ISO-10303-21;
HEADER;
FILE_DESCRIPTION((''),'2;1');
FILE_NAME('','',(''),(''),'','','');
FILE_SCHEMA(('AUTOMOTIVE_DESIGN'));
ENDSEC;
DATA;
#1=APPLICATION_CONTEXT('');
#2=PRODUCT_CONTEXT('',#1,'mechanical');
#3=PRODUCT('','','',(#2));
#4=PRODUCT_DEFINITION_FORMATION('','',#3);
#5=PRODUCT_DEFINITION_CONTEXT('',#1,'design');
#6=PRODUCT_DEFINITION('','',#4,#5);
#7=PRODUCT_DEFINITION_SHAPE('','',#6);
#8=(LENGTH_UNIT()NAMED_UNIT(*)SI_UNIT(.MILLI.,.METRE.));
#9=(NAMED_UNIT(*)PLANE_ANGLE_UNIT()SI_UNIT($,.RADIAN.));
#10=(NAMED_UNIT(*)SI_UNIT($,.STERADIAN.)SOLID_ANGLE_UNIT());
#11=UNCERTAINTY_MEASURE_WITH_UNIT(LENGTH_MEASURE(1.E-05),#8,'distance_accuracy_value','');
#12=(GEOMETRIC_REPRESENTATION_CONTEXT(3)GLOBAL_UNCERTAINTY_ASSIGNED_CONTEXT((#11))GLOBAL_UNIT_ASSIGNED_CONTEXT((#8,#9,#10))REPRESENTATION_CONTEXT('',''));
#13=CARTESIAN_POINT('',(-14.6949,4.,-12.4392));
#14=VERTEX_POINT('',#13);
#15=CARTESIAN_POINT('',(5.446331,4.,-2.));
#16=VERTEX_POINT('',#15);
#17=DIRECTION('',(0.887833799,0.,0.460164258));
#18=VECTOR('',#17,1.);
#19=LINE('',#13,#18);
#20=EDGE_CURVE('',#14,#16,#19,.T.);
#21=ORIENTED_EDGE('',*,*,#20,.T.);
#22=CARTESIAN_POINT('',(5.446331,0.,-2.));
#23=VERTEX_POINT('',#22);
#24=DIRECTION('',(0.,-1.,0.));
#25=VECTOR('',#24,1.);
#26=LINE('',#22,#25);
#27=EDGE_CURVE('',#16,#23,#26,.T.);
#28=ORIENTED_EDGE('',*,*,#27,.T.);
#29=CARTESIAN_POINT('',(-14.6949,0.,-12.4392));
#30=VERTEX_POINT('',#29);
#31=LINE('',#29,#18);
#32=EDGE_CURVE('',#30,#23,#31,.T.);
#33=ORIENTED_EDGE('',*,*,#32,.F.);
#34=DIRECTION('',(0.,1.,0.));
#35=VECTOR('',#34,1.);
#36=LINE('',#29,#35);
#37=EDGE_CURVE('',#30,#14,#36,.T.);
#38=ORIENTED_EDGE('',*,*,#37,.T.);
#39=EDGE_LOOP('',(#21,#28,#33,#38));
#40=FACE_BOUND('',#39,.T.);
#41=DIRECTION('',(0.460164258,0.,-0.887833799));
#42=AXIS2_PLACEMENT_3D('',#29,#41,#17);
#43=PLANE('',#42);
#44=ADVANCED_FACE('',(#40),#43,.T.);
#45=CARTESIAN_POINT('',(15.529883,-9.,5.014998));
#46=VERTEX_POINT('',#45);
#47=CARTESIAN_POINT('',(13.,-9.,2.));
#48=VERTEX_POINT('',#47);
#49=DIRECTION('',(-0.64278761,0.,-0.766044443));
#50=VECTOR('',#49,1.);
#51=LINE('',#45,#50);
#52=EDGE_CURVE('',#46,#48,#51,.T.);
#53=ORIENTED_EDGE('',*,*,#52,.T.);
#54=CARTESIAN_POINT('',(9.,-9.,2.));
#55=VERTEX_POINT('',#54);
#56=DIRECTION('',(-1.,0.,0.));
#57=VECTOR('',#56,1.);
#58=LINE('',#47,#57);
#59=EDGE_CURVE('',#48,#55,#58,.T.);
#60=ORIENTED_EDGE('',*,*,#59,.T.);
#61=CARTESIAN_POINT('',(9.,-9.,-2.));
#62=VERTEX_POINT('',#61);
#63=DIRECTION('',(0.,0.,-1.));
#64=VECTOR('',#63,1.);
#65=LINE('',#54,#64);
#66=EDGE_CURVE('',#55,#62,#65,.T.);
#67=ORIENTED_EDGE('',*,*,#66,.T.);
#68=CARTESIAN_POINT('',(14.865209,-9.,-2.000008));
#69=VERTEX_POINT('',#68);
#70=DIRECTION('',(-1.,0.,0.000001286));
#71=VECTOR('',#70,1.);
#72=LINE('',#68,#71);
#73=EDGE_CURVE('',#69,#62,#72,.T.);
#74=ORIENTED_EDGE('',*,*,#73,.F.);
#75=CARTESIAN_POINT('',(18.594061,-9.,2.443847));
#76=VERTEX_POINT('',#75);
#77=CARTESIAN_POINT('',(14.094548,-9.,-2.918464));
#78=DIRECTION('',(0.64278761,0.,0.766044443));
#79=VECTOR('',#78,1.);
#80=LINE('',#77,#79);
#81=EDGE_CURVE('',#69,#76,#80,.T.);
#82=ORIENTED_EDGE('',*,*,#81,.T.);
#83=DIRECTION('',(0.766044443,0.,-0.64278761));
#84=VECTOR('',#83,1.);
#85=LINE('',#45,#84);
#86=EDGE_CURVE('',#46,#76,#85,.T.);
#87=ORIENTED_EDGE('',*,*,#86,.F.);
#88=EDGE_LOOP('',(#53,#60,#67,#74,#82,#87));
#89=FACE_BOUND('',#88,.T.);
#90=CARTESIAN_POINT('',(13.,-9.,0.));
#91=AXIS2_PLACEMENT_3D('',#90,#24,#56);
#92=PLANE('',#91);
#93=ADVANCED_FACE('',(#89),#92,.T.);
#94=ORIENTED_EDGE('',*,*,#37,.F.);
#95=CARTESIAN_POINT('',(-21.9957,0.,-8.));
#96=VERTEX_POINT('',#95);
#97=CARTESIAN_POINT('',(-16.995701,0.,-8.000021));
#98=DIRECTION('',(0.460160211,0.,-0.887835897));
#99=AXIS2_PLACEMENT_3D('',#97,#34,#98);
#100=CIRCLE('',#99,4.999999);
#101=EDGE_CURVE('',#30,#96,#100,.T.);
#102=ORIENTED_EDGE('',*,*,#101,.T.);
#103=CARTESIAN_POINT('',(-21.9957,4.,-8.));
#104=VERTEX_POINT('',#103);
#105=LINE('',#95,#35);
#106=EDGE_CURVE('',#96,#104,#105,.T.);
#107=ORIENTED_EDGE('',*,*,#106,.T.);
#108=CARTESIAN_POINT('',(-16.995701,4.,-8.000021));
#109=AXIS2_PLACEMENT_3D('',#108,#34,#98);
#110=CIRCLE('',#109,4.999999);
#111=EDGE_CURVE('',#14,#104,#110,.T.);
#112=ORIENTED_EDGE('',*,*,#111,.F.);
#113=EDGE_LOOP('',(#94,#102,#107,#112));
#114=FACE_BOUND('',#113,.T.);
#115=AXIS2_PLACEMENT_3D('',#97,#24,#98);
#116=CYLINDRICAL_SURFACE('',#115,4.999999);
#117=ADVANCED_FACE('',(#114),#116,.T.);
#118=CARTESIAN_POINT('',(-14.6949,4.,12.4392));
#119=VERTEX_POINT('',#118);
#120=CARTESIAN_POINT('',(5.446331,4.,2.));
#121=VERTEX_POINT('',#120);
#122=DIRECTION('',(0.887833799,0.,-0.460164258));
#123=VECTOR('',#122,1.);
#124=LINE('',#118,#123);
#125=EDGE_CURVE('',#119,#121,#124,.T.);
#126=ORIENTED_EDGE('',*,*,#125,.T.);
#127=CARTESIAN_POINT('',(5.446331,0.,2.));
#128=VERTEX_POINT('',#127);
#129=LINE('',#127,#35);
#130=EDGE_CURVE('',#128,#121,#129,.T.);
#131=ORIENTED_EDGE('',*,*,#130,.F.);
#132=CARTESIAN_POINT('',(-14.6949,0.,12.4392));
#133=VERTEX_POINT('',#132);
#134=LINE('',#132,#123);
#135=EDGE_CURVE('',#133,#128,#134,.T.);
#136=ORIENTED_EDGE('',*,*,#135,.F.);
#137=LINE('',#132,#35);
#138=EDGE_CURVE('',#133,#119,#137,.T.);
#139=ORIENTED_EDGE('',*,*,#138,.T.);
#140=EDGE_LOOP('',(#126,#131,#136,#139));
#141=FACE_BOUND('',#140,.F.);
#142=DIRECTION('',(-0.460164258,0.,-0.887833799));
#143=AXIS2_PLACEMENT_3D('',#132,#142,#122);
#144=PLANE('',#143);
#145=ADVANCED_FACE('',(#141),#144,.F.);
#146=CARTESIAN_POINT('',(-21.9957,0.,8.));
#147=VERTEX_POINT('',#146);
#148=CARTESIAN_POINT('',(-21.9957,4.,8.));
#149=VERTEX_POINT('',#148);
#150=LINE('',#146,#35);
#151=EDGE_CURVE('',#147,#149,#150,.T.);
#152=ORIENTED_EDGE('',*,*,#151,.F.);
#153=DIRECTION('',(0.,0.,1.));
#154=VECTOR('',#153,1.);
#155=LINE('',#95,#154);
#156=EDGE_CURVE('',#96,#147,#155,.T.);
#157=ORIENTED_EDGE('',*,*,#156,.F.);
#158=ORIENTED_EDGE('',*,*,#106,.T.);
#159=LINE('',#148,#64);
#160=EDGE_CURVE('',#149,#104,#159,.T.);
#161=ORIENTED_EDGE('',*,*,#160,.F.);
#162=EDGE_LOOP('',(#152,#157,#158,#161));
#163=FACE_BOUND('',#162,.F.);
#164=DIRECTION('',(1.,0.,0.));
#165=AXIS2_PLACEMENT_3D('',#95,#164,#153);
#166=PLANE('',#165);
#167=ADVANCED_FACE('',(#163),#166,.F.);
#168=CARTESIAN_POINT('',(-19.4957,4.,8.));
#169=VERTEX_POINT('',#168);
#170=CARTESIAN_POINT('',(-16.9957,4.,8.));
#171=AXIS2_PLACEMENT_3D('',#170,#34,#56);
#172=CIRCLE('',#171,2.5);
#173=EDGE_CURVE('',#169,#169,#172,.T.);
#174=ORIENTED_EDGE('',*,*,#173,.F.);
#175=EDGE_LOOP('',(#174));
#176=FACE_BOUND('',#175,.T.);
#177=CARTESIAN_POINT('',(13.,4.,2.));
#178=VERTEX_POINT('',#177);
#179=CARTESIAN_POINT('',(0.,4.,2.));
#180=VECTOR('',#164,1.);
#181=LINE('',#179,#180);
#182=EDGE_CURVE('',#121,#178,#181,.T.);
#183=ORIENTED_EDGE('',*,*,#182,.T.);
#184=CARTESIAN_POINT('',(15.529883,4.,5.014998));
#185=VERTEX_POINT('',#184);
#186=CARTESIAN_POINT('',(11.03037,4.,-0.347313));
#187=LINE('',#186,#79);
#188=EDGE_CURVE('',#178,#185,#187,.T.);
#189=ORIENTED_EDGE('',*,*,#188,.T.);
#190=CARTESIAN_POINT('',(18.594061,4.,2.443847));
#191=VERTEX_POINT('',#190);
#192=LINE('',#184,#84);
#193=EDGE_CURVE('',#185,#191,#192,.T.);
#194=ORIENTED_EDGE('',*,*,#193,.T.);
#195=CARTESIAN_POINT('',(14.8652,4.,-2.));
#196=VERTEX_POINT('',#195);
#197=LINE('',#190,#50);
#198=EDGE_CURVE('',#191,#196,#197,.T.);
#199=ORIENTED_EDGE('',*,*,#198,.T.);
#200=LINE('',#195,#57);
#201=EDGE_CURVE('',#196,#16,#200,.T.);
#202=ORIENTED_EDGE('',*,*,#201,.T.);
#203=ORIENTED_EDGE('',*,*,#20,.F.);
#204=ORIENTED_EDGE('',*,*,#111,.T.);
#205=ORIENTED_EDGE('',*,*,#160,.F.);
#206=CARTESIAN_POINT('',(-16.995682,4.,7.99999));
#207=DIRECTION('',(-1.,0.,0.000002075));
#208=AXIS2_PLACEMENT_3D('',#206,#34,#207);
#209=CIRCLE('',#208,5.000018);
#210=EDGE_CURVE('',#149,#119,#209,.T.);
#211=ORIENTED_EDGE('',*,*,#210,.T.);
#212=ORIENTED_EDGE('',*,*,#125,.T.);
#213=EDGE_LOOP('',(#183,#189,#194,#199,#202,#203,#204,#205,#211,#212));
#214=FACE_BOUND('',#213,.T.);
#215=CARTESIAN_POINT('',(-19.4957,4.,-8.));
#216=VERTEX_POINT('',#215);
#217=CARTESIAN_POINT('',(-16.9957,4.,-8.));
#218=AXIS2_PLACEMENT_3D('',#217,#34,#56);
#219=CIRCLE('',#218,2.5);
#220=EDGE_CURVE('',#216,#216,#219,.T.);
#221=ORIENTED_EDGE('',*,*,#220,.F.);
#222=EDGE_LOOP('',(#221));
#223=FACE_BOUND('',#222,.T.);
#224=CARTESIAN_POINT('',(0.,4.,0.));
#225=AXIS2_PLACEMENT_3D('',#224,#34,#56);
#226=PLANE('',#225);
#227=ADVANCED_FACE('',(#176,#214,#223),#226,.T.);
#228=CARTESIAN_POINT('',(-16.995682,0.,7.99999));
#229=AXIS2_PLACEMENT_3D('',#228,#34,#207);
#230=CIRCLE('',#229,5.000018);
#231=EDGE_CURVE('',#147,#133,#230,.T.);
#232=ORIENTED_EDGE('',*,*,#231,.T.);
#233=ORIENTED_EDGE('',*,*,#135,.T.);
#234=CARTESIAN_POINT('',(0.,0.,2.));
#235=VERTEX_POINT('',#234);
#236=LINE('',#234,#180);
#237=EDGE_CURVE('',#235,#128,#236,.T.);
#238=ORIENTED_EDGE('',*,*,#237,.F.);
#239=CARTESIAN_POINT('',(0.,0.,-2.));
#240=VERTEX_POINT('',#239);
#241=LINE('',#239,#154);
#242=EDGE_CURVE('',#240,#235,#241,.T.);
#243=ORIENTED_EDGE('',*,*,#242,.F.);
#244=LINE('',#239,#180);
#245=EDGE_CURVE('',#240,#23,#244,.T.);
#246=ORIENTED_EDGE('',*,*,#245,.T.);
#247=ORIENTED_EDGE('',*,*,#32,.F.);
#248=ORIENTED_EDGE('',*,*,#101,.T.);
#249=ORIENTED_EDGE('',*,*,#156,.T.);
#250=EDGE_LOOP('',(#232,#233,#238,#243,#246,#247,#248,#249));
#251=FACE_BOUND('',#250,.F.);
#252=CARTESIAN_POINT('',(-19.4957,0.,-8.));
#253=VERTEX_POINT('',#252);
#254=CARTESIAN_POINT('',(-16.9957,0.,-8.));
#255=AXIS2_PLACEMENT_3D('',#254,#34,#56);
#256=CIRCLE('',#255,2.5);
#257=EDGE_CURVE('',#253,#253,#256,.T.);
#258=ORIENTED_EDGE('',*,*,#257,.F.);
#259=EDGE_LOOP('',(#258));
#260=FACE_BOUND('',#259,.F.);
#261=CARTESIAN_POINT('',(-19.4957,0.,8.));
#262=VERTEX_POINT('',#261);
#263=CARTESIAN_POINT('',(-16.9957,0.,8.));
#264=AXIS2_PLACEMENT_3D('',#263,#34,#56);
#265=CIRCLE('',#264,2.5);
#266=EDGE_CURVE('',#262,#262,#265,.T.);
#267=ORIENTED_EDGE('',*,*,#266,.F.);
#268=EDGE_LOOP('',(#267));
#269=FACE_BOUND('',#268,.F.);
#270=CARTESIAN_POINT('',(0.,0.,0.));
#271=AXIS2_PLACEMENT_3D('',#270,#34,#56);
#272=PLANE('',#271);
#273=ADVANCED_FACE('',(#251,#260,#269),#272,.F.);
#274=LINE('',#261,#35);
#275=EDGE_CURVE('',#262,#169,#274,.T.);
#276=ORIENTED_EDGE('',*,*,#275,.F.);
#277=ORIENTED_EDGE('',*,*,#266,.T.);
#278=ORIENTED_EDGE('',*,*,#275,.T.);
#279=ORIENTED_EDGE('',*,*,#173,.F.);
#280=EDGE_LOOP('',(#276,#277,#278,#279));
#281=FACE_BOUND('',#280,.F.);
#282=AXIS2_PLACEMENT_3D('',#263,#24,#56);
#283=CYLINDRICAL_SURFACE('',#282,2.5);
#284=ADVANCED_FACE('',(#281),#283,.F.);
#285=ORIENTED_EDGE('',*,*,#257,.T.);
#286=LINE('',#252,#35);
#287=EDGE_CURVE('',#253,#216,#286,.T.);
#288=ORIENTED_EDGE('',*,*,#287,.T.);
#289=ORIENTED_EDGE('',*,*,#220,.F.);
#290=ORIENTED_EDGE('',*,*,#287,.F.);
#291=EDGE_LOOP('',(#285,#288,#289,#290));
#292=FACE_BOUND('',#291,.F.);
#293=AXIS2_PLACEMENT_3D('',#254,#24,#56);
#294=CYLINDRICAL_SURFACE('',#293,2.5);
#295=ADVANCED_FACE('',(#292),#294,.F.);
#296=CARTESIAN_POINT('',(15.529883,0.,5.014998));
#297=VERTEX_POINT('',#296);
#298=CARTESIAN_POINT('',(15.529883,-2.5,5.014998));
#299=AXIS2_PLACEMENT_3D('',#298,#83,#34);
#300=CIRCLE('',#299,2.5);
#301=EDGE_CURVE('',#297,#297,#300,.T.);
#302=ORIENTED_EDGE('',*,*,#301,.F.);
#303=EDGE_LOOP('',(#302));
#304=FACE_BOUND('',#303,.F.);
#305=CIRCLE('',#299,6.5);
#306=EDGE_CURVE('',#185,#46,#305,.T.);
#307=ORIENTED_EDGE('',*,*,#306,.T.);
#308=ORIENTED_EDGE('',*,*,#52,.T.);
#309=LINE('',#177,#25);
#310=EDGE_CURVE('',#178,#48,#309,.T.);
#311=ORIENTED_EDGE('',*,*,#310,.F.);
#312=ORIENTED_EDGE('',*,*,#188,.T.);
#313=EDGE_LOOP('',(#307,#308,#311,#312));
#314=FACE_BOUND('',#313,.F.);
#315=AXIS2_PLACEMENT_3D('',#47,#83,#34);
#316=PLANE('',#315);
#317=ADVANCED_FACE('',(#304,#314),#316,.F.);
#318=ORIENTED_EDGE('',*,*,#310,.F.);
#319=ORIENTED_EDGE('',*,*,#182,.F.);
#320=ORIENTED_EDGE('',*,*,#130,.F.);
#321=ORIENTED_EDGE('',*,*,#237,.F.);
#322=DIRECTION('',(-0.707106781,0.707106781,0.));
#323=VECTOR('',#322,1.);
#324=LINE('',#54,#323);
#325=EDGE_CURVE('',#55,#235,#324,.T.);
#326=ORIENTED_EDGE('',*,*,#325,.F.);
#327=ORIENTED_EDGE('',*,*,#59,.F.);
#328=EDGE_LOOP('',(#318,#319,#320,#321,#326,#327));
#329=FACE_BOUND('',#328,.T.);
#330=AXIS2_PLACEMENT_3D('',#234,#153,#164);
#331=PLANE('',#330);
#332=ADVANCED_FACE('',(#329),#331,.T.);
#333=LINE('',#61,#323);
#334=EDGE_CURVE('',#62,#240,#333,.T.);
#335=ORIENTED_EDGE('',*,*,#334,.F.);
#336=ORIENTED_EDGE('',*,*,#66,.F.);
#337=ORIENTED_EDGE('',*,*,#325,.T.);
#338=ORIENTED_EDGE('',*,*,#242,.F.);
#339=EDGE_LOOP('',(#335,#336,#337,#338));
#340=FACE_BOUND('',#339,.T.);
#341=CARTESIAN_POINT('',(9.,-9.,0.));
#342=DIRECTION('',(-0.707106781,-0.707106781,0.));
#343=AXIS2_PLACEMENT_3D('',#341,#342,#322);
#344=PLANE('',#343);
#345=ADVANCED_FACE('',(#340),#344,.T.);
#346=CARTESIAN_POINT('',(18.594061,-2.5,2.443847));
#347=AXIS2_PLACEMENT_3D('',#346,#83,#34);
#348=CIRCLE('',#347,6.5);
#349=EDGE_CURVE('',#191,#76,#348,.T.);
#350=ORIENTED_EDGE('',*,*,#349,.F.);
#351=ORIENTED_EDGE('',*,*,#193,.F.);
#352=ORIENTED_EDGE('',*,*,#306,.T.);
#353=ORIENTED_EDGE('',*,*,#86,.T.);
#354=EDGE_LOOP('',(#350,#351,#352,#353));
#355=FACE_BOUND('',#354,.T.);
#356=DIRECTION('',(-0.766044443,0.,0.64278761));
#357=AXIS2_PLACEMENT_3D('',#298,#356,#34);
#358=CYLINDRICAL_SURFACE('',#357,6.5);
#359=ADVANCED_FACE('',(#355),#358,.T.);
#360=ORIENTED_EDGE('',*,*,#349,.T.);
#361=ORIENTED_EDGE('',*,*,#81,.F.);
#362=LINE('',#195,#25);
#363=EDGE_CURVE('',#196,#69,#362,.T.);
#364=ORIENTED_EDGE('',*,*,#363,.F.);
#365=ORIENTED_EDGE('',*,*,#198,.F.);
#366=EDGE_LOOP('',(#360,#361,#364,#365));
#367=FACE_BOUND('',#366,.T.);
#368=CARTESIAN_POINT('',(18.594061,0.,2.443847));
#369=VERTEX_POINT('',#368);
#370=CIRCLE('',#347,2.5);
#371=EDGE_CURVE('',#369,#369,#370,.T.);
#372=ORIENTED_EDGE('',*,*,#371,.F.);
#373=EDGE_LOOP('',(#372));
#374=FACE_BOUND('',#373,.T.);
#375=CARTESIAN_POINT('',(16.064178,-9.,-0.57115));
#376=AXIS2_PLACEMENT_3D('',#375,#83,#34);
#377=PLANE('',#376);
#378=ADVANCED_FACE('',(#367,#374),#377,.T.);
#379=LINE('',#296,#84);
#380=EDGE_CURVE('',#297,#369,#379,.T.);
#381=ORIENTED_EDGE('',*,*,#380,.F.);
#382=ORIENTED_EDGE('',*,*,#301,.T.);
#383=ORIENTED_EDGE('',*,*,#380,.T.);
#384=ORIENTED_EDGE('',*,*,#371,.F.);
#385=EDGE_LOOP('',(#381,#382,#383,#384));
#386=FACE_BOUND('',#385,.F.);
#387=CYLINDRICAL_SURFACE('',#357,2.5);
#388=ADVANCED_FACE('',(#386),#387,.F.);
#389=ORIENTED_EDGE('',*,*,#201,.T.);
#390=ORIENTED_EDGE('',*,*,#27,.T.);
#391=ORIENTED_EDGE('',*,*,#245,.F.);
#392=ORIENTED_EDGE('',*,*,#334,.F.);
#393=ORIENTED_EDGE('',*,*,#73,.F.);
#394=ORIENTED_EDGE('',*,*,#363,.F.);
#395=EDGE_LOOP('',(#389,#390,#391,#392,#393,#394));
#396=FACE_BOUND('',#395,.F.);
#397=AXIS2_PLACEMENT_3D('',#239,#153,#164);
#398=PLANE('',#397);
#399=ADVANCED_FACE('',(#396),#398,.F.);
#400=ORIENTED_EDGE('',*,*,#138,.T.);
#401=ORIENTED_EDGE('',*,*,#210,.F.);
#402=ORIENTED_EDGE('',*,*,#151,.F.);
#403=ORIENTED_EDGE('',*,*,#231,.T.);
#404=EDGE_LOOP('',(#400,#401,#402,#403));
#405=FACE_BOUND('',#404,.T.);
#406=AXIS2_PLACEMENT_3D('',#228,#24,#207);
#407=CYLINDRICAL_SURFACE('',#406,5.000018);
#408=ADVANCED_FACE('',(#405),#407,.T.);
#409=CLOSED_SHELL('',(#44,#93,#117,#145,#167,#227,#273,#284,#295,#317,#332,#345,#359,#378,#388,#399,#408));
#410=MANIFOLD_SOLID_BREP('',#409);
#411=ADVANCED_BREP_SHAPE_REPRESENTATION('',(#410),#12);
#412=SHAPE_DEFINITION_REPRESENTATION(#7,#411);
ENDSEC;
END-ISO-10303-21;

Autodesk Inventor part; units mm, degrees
ref_plane "YZ Plane" through (0, 0, 0) normal (1, 0, 0) x (0, 1, 0)
ref_plane "XZ Plane" through (0, 0, 0) normal (0, 1, 0) x (-1, 0, 0)
sketch "草图1" plane through (0, 0, 0) normal (0, 1, 0) x (-1, 0, 0)
  line L0 (55.5004, 0) -> (-70.183, 0)
  line L1 (21.9957, -8) -> (21.9957, 8)
  line L2 (14.6949, 12.4392) -> (-9.3051, 0)
  line L3 (14.6949, -12.4392) -> (-9.3051, 0)
  arc A0 (14.6949, -12.4392) -> (21.9957, -8) centre (16.9957, -8) ccw
  arc A1 (21.9957, 8) -> (14.6949, 12.4392) centre (16.9957, 8) ccw
  circle A2 centre (16.9957, -8) radius 2.5
  circle A3 centre (16.9957, 8) radius 2.5
  point P0 (0, 0)
  dimension "d0" = 5
  dimension "d1" = 16
  dimension "d2" = 24
  dimension "d3" = 5
  dimension "d4" = 5
extrude "拉伸1" add sketch "草图1" along normal blind 4
sketch "草图2" plane through (0, 0, 0) normal (0, 0, 1) x (1, 0, 0)
  line L0 (9.3051, 0) -> (-14.6949, 0) projected
  line L1 (9.3051, 0) -> (9.3051, 4) projected
  line L2 (-14.6949, 4) -> (9.3051, 4) projected
  line L3 (-14.6949, 0) -> (-14.6949, 4) projected
  line L4 (0, 4) -> (13, 4)
  line L5 (13, 4) -> (13, -9)
  line L6 (13, -9) -> (9, -9)
  line L7 (9, -9) -> (0, 0)
  line L8 (0, 0) -> (0, 4)
  dimension "d7" = 13
  dimension "d8" = 13
  dimension "d9" = 4
extrude "拉伸2" add sketch "草图2" along normal mid plane 4 contours L1 L4 L5 L6 L7 L0 | L0 L8 L2 L1
ref_plane "工作平面1" through (13, -9, 2) normal (0.7660444, 0, -0.6427876) x (0, 1, 0)
sketch "草图3" plane through (13, -9, 2) normal (0.7660444, 0, -0.6427876) x (0, 1, 0)
  line L0 (13, -3.0642) -> (13, 0) projected
  line L1 (0, 0) -> (13, 0) projected
  line L2 (0, -3.0642) -> (0, 0) projected
  line L3 (13, -3.0642) -> (0, -3.0642) projected
  line L4 (9, -7.9196) -> (9, -11.4204) projected
  line L5 (13, -7.9196) -> (9, -7.9196) projected
  line L6 (13, -7.9196) -> (13, -3.0642) projected
  line L7 (13, -3.0642) -> (0, -3.0642) projected
  line L8 (0, -3.0642) -> (0, -5.6353) projected
  line L9 (0, -5.6353) -> (9, -11.4204) projected
  line L10 (0, -3.0642) -> (13, -3.0642)
  line L11 (13, -3.0642) -> (13, 3.9358)
  line L12 (0, 3.9358) -> (0, -3.0642)
  arc A0 (13, 3.9358) -> (0, 3.9358) centre (6.5, 3.9358) ccw
  circle A1 centre (6.5, 3.9358) radius 2.5
  point P0 (9, -9.8883)
  dimension "d13" = 6.5
  dimension "d14" = 7
  dimension "d15" = 5
extrude "拉伸3" add sketch "草图3" along normal blind 4 contours L3 L2 L1 L0 | L1 L12 A0 L11
sketch "草图4" plane through (0, 4, 0) normal (0, 1, 0) x (1, 0, 0)
  line L0 (13, -2) -> (5.4463, -2) projected
  line L1 (14.0946, 2.9184) -> (18.5941, -2.4439) projected
  line L2 (13, 2) -> (14.0946, 2.9184) projected
  line L3 (13, 2) -> (14.8652, 2)
  point P0 (0, 0)
extrude "拉伸4" cut sketch "草图4" against normal blind 20
